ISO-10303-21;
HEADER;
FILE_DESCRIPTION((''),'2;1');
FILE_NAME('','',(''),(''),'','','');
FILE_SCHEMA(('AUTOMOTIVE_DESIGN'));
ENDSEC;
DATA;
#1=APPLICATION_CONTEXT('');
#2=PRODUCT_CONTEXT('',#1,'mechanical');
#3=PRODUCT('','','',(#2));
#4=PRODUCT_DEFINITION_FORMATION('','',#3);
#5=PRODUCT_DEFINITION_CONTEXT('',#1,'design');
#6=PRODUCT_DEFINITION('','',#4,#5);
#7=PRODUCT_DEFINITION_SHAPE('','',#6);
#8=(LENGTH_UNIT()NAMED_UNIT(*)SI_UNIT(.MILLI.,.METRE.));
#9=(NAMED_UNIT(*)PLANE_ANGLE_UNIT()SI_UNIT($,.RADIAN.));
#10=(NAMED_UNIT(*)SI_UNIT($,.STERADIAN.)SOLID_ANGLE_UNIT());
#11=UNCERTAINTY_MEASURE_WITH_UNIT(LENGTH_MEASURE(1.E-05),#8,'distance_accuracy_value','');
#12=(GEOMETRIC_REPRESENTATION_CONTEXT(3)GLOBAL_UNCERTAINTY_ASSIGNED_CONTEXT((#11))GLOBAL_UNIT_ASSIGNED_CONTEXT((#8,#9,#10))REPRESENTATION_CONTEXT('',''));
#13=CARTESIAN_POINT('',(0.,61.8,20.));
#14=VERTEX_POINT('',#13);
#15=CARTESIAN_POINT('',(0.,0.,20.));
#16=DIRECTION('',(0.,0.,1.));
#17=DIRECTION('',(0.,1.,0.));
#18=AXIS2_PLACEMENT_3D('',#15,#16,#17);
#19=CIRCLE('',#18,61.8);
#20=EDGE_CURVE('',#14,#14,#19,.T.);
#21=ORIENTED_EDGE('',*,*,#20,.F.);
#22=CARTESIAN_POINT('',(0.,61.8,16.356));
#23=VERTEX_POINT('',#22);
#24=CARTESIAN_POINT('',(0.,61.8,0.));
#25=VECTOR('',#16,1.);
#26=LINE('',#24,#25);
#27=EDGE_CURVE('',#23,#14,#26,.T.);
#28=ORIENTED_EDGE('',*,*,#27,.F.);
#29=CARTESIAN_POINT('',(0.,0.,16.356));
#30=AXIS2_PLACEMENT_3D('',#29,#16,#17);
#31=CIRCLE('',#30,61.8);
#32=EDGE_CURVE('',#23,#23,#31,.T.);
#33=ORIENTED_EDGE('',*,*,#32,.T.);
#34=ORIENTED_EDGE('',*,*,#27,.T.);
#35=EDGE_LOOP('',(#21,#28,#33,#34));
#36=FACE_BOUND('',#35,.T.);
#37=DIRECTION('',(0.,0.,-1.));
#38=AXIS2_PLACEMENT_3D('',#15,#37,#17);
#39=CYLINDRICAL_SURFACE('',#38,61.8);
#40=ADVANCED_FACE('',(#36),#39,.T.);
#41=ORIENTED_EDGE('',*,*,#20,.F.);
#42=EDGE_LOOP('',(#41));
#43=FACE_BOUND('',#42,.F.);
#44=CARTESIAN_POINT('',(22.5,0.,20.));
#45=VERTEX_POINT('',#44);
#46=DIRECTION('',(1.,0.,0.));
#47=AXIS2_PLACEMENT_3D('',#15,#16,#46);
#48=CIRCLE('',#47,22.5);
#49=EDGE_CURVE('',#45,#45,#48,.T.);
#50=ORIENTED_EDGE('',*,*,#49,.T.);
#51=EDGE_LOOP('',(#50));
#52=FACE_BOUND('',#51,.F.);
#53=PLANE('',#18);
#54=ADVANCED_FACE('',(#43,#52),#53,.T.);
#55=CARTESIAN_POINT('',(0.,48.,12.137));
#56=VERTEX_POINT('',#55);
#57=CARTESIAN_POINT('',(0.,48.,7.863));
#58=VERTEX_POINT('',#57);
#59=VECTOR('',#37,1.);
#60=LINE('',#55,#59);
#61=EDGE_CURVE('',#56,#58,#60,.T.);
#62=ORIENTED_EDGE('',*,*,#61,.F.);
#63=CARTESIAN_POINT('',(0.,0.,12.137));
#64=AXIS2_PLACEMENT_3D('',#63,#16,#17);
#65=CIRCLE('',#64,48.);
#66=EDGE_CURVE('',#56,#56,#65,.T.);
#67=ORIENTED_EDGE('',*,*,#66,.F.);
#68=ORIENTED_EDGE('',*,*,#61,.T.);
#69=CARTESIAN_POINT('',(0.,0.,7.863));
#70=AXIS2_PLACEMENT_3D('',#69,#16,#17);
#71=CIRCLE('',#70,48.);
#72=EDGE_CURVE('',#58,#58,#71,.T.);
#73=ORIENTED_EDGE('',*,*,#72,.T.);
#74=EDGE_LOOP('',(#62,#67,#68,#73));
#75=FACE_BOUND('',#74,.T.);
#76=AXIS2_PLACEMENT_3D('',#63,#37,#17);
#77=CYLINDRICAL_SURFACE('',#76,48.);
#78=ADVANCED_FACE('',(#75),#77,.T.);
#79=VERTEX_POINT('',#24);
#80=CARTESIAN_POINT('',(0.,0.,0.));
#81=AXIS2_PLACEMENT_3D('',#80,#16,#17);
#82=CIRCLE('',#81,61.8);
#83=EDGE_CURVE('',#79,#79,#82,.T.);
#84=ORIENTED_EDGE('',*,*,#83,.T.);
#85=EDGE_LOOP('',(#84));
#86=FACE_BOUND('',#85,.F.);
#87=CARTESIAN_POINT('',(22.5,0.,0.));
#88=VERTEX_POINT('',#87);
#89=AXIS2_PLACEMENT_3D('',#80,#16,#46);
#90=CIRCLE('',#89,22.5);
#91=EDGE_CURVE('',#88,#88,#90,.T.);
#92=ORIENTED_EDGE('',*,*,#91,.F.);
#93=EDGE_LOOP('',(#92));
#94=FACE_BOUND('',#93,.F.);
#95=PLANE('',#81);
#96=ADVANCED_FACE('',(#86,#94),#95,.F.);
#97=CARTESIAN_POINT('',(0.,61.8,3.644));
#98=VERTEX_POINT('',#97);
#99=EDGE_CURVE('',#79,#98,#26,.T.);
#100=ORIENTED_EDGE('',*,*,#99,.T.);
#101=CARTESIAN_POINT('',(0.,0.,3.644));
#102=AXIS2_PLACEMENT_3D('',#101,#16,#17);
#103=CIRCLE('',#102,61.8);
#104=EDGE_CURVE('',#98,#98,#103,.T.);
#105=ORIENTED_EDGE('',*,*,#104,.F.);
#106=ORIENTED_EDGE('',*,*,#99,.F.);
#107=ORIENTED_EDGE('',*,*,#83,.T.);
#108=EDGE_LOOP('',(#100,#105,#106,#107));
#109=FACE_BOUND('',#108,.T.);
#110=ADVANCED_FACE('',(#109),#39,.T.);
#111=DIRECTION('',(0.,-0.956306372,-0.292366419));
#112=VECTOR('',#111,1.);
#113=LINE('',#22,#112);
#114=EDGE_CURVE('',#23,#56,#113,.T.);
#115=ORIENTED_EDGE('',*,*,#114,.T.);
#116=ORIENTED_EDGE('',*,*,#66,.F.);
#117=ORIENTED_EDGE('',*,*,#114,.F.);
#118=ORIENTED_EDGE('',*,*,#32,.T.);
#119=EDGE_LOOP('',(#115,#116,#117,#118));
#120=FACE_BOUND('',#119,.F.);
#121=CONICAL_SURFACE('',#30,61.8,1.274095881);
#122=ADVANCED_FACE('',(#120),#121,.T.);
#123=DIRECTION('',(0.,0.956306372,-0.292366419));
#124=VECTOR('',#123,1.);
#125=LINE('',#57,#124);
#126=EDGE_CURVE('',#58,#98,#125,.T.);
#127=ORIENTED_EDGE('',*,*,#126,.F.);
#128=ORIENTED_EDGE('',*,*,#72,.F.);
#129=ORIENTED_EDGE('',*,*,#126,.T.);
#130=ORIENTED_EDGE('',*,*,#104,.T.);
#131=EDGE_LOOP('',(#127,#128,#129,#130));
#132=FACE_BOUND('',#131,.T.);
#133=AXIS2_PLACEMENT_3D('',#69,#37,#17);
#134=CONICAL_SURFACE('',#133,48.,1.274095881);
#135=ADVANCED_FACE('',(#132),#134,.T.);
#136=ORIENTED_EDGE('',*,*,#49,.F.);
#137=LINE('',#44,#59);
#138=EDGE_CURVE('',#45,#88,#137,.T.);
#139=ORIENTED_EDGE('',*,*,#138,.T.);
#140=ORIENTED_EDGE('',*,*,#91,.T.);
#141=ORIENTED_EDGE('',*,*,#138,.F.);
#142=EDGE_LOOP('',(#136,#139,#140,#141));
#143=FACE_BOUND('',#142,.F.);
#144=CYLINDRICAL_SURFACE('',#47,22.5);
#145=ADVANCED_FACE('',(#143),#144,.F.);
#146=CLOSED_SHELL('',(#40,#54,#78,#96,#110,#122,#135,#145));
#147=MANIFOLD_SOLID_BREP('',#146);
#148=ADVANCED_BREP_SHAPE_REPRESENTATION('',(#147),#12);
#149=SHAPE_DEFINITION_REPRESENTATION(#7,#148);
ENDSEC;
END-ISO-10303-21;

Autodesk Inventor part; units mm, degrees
ref_plane "YZ Plane" through (0, 0, 0) normal (1, 0, 0) x (0, 1, 0)
ref_plane "XZ Plane" through (0, 0, 0) normal (0, 1, 0) x (-1, 0, 0)
sketch "Boceto principal" plane through (0, 0, 0) normal (1, 0, 0) x (0, 1, 0)
  line L0 (0, 20) -> (61.8, 20)
  line L1 (61.8, 20) -> (61.8, 16.356)
  line L2 (61.8, 16.356) -> (48, 12.137)
  line L3 (48, 12.137) -> (48, 7.863)
  line L4 (48, 7.863) -> (61.8, 3.644)
  line L5 (61.8, 3.644) -> (61.8, 0)
  line L6 (61.8, 0) -> (0, 0)
  line L7 (59, 15.5) -> (59, 4.5) construction
  line L8 (48, 10) -> (59, 10) construction
  line L9 (61.8, 16.356) -> (61.8, 3.644)
  line L10 (0, -4) -> (0, 24) projected
  line L11 (0, 0) -> (0, 20)
  dimension "d0" = 11
  dimension "d1" = 34
  dimension "d2" = 2.8
  dimension "d6" = 20
  dimension "d21" = 118
  dimension "d25" = 13.8
  dimension "d27" = 10
ref_plane "Plano de correa" through (0, 48, 10) normal (0, 0, 1) x (1, 0, 0)
revolve "Cuerpo" add sketch "Boceto principal" angle 360 about axis through (0, 0, -10) along (0, 0, 1)
revolve "Para ranuras" cut sketch "Boceto principal" angle 360 about axis through (0, 0, -10) along (0, 0, 1) contours L9 L4 L3 L2
fillet "Empalme externo" [suppressed]
fillet "Empalme interno" [suppressed]
pattern_of_one "Patrón para ranuras"
sketch "Boceto2" plane through (0, 0, 20) normal (0, 0, 1) x (1, 0, 0)
  circle A0 centre (0, 0) radius 22.5
  dimension "d28" = 45
extrude "Extrusión1" cut sketch "Boceto2" against normal blind 30
equation "\"d0\" = da_Bw"
equation "\"d1\" = da_Alfa"
equation "\"d2\" = da_c"
equation "\"d21\" = da_Dw"
equation "\"d25\" = da_Hd"
equation "\"d27\" = da_Se"
equation "\"da_r1\" = 0"
equation "\"da_r2\" = 0"
equation "\"d18\" = da_Sg"
equation "\"da_Bw\" = 11"
equation "\"da_Alfa\" = 34deg"
equation "\"da_c\" = 2.8"
equation "\"da_Dw\" = 118"
equation "\"da_Hd\" = 13.8"
equation "\"da_Se\" = 10"
equation "\"da_Sg\" = 15"
properties part number "Polea ranurada1" material "Steel"
